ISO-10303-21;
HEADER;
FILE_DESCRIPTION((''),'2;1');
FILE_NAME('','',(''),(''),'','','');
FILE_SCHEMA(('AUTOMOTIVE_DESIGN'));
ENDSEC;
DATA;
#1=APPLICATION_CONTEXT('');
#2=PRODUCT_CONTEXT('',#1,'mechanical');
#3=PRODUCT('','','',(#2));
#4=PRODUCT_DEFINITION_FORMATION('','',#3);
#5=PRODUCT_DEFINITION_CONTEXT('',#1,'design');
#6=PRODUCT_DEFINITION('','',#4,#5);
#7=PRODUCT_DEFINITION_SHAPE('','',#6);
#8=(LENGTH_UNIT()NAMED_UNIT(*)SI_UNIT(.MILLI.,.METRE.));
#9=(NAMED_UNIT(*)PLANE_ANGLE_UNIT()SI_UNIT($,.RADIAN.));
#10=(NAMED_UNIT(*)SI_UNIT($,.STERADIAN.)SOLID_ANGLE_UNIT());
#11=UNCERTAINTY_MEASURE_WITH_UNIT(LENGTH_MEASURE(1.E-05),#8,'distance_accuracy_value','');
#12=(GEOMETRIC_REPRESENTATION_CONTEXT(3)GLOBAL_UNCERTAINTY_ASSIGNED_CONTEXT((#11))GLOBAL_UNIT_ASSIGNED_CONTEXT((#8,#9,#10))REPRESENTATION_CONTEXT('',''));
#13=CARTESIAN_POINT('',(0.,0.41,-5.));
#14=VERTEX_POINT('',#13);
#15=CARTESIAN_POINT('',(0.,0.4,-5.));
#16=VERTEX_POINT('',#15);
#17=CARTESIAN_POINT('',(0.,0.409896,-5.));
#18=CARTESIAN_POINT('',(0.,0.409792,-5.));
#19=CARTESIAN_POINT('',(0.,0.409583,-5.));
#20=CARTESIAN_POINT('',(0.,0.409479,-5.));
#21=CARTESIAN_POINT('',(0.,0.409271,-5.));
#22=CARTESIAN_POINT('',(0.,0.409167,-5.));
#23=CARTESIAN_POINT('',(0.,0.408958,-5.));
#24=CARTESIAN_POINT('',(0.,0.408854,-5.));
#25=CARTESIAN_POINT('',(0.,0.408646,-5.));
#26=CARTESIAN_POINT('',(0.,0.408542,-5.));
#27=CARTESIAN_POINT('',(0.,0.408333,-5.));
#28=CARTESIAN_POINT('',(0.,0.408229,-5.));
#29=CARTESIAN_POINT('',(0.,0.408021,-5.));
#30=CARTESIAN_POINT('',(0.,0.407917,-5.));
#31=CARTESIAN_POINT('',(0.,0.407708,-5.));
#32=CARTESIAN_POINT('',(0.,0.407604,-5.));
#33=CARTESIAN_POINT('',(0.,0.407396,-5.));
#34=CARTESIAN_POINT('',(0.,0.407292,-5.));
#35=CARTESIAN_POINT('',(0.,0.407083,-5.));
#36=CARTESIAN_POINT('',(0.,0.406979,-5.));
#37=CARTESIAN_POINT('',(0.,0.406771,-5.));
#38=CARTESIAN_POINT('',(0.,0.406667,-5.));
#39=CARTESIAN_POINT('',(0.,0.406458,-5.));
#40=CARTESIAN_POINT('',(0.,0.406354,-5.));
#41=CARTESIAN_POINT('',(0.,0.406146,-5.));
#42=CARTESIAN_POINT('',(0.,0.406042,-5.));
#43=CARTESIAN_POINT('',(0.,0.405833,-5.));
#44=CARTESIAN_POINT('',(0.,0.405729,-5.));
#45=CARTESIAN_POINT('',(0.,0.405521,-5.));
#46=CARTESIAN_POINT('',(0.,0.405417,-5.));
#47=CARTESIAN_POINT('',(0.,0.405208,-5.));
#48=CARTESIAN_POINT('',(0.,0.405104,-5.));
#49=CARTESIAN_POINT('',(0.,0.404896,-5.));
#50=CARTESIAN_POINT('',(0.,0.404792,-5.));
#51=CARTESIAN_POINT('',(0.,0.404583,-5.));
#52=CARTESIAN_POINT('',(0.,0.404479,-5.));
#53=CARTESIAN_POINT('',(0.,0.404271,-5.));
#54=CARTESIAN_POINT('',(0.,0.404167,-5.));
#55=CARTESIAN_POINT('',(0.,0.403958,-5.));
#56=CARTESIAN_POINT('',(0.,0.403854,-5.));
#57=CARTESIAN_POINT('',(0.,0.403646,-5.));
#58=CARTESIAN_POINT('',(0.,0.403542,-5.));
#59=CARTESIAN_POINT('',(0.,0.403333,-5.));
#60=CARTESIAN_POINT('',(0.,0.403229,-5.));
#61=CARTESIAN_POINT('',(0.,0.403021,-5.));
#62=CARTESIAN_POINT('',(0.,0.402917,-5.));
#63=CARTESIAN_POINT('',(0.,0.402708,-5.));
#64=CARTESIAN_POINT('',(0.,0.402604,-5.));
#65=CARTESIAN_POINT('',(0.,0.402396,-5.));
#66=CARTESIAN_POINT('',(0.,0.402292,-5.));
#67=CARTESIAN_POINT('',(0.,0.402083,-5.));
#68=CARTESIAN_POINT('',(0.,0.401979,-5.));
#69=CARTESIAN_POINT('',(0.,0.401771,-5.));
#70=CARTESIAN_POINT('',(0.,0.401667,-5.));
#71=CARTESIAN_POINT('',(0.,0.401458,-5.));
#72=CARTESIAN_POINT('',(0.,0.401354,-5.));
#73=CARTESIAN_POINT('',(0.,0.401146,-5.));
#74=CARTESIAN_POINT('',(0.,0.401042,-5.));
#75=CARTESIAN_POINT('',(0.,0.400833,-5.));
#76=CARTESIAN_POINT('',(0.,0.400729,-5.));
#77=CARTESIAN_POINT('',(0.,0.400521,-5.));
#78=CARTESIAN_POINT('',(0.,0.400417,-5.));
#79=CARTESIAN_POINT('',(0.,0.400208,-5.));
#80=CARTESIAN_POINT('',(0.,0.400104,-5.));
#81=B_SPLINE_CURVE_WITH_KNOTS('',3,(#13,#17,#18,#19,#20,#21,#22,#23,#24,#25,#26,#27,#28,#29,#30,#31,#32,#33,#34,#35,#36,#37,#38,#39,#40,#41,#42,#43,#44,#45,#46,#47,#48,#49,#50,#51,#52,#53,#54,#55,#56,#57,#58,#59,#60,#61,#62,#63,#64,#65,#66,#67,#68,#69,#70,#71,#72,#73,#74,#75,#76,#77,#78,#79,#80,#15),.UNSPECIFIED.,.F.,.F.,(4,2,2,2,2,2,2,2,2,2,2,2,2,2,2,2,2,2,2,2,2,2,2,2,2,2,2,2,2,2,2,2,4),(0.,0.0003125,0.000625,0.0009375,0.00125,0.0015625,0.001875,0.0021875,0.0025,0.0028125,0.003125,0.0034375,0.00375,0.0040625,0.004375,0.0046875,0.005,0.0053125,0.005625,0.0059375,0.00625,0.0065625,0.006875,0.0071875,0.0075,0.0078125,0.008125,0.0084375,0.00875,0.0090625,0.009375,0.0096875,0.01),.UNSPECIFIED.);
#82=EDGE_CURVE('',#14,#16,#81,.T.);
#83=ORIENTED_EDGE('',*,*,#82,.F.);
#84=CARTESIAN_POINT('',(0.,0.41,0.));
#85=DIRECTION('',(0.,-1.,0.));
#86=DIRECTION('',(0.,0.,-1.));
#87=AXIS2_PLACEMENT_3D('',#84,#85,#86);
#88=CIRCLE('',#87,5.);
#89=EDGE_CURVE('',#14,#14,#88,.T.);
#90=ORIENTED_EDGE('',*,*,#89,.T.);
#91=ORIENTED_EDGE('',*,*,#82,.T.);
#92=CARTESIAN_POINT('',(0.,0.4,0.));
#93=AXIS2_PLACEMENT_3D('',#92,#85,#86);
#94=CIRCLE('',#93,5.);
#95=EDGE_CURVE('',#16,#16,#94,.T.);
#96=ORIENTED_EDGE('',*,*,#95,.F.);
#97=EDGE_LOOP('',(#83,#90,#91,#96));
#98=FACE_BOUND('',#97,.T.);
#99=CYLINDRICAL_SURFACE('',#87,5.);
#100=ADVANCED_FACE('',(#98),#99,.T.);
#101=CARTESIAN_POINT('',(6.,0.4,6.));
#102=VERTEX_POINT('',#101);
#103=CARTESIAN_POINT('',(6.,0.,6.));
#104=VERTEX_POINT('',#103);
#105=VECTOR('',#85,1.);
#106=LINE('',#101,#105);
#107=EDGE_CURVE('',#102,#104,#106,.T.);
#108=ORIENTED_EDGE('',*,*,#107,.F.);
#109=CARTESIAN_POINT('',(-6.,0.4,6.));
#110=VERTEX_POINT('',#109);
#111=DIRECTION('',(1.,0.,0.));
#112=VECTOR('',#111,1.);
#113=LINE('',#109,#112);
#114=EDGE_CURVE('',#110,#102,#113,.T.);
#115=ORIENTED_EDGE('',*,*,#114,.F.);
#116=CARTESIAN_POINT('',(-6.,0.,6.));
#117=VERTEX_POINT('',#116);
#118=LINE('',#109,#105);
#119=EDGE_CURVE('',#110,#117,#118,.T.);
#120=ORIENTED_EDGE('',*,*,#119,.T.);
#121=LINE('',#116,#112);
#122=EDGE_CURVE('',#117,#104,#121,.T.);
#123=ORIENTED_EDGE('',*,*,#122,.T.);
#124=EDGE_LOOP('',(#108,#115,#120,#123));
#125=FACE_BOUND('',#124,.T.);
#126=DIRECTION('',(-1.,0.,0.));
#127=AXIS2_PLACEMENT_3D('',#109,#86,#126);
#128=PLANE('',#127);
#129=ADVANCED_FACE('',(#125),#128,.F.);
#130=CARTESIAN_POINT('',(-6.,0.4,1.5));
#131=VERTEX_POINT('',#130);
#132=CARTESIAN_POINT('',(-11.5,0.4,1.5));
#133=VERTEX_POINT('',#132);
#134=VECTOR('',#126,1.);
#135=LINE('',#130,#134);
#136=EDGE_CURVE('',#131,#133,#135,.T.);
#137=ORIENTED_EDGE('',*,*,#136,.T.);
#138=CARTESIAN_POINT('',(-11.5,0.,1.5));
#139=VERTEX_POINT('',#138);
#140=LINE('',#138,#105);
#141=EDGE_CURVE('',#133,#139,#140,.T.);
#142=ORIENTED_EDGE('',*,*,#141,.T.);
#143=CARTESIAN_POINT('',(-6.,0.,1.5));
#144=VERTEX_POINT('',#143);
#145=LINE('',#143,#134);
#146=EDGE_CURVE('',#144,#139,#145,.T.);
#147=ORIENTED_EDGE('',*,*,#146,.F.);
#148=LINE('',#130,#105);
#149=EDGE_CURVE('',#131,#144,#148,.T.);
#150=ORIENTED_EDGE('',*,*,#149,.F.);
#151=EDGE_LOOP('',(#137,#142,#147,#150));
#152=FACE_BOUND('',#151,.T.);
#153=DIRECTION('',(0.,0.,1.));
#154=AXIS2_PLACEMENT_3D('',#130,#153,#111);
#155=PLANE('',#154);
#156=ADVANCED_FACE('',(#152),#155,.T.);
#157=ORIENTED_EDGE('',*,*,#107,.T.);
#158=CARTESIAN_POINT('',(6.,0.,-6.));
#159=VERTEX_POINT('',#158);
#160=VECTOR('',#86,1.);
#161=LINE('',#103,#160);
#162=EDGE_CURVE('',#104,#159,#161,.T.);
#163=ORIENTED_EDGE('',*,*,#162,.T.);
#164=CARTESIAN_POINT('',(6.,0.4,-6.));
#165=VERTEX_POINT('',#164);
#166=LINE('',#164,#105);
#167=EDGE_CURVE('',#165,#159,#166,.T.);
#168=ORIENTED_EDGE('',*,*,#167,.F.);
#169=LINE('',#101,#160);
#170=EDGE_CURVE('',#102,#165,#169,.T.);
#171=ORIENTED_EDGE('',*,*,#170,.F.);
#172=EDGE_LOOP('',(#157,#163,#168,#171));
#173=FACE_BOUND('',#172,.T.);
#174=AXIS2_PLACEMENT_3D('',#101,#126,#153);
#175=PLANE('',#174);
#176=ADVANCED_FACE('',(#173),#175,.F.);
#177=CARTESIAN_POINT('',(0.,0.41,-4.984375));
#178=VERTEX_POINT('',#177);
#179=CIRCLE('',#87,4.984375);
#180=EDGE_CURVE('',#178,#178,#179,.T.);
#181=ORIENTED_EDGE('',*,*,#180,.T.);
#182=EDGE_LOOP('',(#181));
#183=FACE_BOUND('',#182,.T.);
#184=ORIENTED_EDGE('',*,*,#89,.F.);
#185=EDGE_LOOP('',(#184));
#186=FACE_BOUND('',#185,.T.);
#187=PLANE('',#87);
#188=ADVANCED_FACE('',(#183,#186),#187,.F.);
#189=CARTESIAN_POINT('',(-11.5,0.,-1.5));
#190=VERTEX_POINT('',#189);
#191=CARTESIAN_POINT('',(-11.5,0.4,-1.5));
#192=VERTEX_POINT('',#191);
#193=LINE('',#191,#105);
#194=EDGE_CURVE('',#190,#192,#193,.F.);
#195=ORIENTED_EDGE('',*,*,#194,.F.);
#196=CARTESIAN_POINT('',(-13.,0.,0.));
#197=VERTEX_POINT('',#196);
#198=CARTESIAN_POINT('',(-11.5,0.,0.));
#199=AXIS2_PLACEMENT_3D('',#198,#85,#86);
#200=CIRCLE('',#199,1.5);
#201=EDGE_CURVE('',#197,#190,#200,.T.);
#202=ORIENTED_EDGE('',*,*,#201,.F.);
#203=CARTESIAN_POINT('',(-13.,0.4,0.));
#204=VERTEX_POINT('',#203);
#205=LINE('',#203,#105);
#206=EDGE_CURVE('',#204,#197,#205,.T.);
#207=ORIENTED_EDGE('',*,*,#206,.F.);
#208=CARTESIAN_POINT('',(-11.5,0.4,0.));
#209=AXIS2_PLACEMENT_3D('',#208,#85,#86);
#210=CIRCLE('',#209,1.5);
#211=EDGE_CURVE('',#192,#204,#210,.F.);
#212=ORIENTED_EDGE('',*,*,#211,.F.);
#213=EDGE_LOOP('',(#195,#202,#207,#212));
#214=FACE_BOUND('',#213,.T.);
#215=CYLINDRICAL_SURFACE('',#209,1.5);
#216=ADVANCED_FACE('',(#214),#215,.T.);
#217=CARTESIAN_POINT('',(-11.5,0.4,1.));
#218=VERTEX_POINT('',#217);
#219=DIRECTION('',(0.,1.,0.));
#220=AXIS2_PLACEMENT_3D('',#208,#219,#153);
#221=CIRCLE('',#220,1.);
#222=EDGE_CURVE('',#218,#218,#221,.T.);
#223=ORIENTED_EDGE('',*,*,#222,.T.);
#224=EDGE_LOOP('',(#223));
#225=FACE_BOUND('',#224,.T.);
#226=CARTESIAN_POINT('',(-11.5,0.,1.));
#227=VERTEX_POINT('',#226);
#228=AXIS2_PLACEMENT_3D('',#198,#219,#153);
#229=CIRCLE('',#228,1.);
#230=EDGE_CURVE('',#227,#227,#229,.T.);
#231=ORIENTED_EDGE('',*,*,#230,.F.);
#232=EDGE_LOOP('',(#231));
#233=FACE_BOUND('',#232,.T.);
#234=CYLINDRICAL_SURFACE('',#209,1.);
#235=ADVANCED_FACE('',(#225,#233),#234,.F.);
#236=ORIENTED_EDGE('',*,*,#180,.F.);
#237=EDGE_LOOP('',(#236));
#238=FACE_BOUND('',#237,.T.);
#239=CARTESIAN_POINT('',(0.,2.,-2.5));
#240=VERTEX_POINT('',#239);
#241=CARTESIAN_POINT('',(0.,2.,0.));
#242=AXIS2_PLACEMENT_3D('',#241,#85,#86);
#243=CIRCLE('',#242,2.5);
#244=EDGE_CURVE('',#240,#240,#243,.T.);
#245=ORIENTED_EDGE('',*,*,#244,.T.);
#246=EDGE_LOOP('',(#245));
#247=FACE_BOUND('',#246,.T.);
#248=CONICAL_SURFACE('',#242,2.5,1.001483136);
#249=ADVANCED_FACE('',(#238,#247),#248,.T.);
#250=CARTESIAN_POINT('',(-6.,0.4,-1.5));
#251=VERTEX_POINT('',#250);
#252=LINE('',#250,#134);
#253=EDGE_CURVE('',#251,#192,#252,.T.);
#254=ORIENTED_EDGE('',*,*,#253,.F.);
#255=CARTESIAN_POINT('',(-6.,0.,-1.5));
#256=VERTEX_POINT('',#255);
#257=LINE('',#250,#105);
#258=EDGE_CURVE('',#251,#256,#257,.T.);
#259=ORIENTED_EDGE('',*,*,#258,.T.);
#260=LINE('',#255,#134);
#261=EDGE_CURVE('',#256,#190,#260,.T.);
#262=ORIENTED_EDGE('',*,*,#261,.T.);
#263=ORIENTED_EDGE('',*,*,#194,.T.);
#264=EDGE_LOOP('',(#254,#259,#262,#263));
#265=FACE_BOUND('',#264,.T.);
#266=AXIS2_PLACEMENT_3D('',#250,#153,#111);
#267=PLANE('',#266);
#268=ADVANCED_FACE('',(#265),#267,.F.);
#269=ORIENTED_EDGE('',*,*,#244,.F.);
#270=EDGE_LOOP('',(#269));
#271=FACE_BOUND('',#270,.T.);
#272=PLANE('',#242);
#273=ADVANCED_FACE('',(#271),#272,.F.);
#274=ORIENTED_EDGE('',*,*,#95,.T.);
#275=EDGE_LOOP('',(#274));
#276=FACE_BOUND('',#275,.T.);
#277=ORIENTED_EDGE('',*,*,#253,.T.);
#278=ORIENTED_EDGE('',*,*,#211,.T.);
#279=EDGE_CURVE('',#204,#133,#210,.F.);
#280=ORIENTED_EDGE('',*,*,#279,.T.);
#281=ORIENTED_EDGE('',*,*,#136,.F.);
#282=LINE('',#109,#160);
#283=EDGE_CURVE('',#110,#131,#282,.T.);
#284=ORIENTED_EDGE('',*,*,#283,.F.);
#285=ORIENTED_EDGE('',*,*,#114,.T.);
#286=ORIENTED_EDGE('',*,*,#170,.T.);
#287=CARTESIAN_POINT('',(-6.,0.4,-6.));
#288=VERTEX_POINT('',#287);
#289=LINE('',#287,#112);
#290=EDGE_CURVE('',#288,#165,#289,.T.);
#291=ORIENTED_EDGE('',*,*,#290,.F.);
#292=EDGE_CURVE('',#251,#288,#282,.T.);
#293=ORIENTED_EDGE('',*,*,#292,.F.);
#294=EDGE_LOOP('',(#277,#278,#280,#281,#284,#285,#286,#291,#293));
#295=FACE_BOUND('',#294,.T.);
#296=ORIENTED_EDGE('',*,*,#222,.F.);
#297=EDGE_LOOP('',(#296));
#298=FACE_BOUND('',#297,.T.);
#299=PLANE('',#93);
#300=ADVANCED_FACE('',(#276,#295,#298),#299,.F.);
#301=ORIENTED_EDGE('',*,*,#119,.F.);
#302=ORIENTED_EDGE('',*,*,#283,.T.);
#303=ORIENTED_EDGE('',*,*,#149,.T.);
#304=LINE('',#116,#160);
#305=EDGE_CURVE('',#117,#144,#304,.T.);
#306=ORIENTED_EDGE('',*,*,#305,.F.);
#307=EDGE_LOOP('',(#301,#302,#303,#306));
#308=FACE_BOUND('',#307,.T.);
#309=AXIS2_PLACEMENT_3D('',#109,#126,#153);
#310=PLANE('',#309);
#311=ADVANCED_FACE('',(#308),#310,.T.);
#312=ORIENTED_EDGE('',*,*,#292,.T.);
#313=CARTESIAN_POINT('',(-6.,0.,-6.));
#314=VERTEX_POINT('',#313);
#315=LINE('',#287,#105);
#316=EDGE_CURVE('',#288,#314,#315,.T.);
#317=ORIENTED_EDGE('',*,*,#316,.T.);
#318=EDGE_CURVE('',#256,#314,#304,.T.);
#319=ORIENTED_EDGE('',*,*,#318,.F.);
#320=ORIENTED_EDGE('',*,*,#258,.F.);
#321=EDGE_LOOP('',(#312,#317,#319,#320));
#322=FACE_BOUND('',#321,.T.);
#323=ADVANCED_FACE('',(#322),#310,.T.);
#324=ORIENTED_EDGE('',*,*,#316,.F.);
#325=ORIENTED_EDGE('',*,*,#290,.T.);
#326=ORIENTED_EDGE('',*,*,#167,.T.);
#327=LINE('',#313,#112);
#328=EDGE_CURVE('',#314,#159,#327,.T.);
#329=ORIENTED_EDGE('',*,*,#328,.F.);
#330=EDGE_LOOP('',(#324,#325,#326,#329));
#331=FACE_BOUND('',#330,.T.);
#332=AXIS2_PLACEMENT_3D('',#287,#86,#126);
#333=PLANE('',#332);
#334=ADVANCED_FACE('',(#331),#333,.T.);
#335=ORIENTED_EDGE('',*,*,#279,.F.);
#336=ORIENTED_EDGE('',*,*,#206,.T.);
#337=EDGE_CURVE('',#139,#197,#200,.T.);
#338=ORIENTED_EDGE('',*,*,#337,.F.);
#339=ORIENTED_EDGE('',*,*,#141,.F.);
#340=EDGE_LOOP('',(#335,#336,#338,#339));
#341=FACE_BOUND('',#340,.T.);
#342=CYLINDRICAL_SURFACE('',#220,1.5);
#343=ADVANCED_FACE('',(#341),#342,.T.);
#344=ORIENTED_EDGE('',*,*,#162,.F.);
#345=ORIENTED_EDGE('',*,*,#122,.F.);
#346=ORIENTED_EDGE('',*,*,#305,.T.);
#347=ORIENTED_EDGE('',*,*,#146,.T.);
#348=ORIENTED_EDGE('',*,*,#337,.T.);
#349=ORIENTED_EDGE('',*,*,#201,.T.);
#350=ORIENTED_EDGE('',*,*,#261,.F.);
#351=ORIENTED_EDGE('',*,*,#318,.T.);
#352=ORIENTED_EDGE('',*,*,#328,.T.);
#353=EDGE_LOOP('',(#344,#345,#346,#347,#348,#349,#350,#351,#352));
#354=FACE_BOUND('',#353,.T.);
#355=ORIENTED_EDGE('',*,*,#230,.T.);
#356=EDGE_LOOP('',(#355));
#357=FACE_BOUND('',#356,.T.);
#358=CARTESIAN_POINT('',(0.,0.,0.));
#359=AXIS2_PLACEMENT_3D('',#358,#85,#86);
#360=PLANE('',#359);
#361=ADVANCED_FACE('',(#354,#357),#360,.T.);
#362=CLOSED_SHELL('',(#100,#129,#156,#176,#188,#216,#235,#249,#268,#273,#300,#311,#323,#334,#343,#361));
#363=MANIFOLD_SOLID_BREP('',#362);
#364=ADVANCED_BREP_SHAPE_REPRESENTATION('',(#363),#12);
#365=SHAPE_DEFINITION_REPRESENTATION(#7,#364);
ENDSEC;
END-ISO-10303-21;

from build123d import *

# Parameters (mm, degrees)
SKETCH_1_W      = 12
SKETCH_1_H      = 12
SKETCH_1_W_2    = 7
SKETCH_1_H_2    = 3
SKETCH_1_R      = 1
EXTRUDE_1_DEPTH = 0.4
EXTRUDE_START   = 0.4
SKETCH_1_5_R    = 2.5
EXTRUDE_2_DEPTH = 1.6
SKETCH_1_6_R    = 5
EXTRUDE_3_DEPTH = 0.01
FILLET_1_R      = 1.5


with BuildPart() as part:
    # 草图1 → 凸台-拉伸1 (new body)
    # profile 1 of 2: a face of its own
    with BuildSketch(Plane(origin=(0, 0, 0), x_dir=(1, 0, 0), z_dir=(0, 1, 0))):
        Rectangle(SKETCH_1_W, SKETCH_1_H)
    # profile 2 of 2: a face of its own
    with BuildSketch(Plane(origin=(0, 0, 0), x_dir=(1, 0, 0), z_dir=(0, 1, 0))):
        with Locations((-9.5, 0)):
            Rectangle(SKETCH_1_W_2, SKETCH_1_H_2)
        with Locations(Location((-11.5, 0, 0), (0, 0, 270))):
            Circle(SKETCH_1_R, mode=Mode.SUBTRACT)
    extrude(amount=EXTRUDE_1_DEPTH)

    # 草图1<5> → 凸台-拉伸2 (add)
    with BuildSketch(Plane(origin=(0, 0, 0), x_dir=(1, 0, 0), z_dir=(0, 1, 0)).offset(EXTRUDE_START)):
        with Locations(Location((0, 0, 0), (0, 0, 90))):
            Circle(SKETCH_1_5_R)
    extrude(amount=EXTRUDE_2_DEPTH)

    # 草图1<6> → 凸台-拉伸3 (add)
    with BuildSketch(Plane(origin=(0, 0, 0), x_dir=(1, 0, 0), z_dir=(0, 1, 0)).offset(EXTRUDE_START)):
        with Locations(Location((0, 0, 0), (0, 0, 90))):
            Circle(SKETCH_1_6_R)
    extrude(amount=EXTRUDE_3_DEPTH)

    # loft up to a face of the part (loft_1)
    loft([Face(Wire([part.edges().sort_by_distance((-1.822421569, 2, 1.711367765))[0]])), Face(Wire([part.edges().sort_by_distance((-3.644843137, 0.4, 3.42273553))[0]]))])

    # 圆角1
    fillet_1_edges = [part.edges().sort_by_distance(p)[0] for p in [
        (-13, 0.2, 1.5),
        (-13, 0.2, -1.5),
    ]]
    fillet(fillet_1_edges, radius=FILLET_1_R - 0.0001)  # a hair under: the kernel refuses the full size


solid = part.part
